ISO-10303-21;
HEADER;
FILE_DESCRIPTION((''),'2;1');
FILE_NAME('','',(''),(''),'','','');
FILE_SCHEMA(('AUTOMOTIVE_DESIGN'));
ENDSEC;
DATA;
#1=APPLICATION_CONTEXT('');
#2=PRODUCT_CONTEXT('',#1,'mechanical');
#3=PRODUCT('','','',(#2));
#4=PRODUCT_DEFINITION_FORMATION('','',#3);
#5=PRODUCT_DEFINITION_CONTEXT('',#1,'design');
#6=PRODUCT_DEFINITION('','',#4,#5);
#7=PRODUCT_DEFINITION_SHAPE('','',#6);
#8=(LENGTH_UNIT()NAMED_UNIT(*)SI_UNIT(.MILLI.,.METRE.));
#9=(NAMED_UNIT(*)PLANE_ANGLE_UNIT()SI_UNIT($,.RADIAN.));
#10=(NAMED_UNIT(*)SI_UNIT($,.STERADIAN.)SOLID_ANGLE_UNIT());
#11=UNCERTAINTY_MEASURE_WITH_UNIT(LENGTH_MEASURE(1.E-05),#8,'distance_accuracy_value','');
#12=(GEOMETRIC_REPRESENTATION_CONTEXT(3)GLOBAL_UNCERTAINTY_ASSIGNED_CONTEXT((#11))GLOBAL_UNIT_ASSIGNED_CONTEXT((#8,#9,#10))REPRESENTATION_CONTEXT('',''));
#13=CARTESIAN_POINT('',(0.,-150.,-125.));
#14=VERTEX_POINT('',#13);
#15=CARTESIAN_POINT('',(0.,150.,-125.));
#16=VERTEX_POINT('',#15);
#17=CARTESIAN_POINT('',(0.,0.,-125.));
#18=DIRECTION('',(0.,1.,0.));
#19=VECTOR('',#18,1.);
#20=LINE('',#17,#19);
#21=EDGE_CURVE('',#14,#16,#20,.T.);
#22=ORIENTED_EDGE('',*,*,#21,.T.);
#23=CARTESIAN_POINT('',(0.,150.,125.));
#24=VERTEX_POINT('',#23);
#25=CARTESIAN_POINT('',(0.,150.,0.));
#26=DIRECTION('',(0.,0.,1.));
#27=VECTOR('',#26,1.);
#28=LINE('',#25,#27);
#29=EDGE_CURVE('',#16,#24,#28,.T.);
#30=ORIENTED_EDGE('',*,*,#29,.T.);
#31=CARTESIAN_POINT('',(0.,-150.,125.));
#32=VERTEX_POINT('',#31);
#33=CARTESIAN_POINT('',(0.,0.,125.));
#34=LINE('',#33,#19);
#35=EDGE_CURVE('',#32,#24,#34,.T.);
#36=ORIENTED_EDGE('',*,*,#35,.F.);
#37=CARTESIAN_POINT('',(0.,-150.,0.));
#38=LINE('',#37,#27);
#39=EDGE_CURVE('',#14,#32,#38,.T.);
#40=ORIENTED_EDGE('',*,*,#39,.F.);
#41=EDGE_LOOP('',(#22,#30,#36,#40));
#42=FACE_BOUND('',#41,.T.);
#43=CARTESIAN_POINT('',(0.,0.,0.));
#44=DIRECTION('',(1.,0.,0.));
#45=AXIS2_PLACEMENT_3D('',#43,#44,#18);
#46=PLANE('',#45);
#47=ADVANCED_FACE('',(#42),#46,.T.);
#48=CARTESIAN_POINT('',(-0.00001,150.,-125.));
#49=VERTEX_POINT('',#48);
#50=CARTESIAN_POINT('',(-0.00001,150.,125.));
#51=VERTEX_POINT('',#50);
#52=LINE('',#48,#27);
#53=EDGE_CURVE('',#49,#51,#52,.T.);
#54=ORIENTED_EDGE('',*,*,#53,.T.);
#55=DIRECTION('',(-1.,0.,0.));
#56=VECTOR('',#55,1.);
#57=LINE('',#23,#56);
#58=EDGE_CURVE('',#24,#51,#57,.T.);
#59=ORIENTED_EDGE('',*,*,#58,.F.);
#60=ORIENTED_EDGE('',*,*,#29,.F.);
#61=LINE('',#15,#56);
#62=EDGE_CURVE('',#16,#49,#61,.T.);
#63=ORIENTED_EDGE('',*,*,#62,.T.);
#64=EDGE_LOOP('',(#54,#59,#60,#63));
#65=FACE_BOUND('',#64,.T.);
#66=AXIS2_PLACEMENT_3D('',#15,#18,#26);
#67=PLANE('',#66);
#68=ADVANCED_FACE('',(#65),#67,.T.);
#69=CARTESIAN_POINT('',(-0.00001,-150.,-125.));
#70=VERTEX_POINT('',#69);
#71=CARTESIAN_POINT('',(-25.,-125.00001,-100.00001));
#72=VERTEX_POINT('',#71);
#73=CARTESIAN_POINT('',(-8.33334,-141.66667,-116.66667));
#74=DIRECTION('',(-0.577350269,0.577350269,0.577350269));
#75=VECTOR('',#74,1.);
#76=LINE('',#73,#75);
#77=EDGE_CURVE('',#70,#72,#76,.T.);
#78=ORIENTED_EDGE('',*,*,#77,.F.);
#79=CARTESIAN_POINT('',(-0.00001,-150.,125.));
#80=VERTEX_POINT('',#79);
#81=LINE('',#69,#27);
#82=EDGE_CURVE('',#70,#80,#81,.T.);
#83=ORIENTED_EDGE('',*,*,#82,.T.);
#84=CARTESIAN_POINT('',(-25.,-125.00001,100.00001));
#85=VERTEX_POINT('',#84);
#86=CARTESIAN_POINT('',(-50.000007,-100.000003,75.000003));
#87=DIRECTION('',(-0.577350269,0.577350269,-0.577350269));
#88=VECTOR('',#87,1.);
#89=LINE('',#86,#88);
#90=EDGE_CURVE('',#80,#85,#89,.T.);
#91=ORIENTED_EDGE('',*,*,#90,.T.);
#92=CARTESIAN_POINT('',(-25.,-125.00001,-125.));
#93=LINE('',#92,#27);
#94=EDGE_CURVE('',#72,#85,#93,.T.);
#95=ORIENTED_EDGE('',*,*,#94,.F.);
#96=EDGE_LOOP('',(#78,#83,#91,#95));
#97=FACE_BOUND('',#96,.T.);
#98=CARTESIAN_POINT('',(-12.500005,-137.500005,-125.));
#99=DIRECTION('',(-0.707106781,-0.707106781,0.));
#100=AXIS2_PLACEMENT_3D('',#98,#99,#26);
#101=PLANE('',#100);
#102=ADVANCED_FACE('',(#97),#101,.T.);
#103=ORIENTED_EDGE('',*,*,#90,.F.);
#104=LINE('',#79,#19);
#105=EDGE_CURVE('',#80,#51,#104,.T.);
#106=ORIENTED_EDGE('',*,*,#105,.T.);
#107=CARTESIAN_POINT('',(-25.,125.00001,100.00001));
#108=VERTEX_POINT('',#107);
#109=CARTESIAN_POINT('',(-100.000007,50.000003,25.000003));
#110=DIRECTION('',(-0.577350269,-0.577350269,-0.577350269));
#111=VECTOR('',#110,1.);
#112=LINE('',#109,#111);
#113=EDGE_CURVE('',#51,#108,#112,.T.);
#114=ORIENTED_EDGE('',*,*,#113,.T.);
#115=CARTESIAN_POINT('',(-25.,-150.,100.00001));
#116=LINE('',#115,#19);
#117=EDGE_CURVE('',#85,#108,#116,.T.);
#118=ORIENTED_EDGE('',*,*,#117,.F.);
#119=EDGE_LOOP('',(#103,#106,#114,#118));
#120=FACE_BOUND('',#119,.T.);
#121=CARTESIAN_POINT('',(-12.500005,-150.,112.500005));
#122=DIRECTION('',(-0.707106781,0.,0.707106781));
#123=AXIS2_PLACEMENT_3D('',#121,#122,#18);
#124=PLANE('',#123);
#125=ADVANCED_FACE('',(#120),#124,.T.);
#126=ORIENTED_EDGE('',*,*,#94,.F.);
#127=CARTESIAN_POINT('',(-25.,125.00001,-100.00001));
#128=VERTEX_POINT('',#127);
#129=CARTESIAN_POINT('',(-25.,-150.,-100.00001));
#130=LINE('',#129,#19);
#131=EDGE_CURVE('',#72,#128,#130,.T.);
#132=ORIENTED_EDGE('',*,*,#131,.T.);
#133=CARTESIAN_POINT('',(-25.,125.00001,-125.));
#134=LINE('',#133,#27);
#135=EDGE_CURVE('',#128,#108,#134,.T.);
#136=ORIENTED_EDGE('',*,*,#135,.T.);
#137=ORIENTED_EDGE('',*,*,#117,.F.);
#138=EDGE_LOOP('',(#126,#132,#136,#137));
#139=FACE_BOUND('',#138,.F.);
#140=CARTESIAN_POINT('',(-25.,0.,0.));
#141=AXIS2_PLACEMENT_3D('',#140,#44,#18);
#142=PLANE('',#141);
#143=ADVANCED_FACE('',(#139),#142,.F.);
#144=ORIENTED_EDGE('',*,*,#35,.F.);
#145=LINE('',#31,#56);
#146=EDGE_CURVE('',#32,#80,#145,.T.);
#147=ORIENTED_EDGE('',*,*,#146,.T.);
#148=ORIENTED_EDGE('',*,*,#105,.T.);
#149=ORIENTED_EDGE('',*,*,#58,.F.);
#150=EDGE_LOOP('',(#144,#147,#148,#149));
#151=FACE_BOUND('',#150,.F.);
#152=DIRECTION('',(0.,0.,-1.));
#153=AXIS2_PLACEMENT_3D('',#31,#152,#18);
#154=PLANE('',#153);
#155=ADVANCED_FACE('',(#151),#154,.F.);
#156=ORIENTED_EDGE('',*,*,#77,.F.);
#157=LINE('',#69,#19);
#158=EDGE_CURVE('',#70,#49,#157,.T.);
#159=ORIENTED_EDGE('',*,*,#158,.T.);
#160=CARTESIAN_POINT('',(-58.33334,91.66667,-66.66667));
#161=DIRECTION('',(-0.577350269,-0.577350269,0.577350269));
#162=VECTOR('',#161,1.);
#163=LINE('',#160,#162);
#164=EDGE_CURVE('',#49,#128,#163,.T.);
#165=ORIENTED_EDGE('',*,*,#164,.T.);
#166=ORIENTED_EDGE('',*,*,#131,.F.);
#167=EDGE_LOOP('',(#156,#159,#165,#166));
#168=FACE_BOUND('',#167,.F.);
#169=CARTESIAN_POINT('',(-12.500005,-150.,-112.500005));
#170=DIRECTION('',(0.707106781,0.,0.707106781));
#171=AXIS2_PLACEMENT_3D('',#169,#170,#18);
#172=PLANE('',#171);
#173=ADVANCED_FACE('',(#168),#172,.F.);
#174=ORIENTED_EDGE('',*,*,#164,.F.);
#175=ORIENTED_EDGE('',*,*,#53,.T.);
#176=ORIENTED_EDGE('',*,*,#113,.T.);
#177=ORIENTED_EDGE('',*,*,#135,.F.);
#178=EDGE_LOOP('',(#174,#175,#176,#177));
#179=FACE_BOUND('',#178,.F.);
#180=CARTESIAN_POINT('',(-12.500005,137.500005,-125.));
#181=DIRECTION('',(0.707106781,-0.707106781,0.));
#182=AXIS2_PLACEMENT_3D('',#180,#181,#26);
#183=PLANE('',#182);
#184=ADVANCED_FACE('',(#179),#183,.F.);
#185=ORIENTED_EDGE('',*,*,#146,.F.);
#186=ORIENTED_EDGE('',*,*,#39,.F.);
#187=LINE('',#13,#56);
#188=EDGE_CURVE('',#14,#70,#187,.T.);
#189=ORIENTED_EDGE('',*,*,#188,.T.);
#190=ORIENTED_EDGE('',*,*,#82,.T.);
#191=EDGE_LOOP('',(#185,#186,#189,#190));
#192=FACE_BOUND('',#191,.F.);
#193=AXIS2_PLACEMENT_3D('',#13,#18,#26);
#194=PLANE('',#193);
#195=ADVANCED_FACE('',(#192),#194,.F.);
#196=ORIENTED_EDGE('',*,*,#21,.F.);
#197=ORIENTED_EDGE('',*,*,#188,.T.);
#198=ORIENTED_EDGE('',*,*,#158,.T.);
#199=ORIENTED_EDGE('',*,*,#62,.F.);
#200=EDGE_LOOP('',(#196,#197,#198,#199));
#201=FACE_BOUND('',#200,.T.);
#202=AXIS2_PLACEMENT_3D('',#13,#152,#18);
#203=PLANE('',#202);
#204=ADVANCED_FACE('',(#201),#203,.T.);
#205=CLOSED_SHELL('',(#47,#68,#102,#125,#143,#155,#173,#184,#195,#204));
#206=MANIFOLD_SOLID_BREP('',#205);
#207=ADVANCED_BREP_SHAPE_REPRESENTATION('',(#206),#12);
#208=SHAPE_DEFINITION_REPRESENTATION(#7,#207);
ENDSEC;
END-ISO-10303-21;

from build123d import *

# Parameters (mm, degrees)
F0_W     = 300
F0_H     = 250
F1_DEPTH = 25
F2_SIZE  = 24.99999


# Not quite as in the source:
# - a fillet or chamfer is up to 0.001 mm smaller than in the source, because OpenCascade refuses the exact size


with BuildPart() as f1:
    # F0 (on Right) → F1 (new body)
    with BuildSketch(Plane.YZ):
        Rectangle(F0_W, F0_H)
    extrude(amount=-F1_DEPTH)

    # F2 (size 25 in the source; OpenCascade refuses exactly that, so slightly less here)
    f2_edges = [f1.edges().sort_by_distance(p)[0] for p in [
        (-25, 0, 125),
        (-25, -150, 0),
        (-25, 0, -125),
        (-25, 150, 0),
    ]]
    chamfer(f2_edges, length=F2_SIZE)


solid = f1.part
